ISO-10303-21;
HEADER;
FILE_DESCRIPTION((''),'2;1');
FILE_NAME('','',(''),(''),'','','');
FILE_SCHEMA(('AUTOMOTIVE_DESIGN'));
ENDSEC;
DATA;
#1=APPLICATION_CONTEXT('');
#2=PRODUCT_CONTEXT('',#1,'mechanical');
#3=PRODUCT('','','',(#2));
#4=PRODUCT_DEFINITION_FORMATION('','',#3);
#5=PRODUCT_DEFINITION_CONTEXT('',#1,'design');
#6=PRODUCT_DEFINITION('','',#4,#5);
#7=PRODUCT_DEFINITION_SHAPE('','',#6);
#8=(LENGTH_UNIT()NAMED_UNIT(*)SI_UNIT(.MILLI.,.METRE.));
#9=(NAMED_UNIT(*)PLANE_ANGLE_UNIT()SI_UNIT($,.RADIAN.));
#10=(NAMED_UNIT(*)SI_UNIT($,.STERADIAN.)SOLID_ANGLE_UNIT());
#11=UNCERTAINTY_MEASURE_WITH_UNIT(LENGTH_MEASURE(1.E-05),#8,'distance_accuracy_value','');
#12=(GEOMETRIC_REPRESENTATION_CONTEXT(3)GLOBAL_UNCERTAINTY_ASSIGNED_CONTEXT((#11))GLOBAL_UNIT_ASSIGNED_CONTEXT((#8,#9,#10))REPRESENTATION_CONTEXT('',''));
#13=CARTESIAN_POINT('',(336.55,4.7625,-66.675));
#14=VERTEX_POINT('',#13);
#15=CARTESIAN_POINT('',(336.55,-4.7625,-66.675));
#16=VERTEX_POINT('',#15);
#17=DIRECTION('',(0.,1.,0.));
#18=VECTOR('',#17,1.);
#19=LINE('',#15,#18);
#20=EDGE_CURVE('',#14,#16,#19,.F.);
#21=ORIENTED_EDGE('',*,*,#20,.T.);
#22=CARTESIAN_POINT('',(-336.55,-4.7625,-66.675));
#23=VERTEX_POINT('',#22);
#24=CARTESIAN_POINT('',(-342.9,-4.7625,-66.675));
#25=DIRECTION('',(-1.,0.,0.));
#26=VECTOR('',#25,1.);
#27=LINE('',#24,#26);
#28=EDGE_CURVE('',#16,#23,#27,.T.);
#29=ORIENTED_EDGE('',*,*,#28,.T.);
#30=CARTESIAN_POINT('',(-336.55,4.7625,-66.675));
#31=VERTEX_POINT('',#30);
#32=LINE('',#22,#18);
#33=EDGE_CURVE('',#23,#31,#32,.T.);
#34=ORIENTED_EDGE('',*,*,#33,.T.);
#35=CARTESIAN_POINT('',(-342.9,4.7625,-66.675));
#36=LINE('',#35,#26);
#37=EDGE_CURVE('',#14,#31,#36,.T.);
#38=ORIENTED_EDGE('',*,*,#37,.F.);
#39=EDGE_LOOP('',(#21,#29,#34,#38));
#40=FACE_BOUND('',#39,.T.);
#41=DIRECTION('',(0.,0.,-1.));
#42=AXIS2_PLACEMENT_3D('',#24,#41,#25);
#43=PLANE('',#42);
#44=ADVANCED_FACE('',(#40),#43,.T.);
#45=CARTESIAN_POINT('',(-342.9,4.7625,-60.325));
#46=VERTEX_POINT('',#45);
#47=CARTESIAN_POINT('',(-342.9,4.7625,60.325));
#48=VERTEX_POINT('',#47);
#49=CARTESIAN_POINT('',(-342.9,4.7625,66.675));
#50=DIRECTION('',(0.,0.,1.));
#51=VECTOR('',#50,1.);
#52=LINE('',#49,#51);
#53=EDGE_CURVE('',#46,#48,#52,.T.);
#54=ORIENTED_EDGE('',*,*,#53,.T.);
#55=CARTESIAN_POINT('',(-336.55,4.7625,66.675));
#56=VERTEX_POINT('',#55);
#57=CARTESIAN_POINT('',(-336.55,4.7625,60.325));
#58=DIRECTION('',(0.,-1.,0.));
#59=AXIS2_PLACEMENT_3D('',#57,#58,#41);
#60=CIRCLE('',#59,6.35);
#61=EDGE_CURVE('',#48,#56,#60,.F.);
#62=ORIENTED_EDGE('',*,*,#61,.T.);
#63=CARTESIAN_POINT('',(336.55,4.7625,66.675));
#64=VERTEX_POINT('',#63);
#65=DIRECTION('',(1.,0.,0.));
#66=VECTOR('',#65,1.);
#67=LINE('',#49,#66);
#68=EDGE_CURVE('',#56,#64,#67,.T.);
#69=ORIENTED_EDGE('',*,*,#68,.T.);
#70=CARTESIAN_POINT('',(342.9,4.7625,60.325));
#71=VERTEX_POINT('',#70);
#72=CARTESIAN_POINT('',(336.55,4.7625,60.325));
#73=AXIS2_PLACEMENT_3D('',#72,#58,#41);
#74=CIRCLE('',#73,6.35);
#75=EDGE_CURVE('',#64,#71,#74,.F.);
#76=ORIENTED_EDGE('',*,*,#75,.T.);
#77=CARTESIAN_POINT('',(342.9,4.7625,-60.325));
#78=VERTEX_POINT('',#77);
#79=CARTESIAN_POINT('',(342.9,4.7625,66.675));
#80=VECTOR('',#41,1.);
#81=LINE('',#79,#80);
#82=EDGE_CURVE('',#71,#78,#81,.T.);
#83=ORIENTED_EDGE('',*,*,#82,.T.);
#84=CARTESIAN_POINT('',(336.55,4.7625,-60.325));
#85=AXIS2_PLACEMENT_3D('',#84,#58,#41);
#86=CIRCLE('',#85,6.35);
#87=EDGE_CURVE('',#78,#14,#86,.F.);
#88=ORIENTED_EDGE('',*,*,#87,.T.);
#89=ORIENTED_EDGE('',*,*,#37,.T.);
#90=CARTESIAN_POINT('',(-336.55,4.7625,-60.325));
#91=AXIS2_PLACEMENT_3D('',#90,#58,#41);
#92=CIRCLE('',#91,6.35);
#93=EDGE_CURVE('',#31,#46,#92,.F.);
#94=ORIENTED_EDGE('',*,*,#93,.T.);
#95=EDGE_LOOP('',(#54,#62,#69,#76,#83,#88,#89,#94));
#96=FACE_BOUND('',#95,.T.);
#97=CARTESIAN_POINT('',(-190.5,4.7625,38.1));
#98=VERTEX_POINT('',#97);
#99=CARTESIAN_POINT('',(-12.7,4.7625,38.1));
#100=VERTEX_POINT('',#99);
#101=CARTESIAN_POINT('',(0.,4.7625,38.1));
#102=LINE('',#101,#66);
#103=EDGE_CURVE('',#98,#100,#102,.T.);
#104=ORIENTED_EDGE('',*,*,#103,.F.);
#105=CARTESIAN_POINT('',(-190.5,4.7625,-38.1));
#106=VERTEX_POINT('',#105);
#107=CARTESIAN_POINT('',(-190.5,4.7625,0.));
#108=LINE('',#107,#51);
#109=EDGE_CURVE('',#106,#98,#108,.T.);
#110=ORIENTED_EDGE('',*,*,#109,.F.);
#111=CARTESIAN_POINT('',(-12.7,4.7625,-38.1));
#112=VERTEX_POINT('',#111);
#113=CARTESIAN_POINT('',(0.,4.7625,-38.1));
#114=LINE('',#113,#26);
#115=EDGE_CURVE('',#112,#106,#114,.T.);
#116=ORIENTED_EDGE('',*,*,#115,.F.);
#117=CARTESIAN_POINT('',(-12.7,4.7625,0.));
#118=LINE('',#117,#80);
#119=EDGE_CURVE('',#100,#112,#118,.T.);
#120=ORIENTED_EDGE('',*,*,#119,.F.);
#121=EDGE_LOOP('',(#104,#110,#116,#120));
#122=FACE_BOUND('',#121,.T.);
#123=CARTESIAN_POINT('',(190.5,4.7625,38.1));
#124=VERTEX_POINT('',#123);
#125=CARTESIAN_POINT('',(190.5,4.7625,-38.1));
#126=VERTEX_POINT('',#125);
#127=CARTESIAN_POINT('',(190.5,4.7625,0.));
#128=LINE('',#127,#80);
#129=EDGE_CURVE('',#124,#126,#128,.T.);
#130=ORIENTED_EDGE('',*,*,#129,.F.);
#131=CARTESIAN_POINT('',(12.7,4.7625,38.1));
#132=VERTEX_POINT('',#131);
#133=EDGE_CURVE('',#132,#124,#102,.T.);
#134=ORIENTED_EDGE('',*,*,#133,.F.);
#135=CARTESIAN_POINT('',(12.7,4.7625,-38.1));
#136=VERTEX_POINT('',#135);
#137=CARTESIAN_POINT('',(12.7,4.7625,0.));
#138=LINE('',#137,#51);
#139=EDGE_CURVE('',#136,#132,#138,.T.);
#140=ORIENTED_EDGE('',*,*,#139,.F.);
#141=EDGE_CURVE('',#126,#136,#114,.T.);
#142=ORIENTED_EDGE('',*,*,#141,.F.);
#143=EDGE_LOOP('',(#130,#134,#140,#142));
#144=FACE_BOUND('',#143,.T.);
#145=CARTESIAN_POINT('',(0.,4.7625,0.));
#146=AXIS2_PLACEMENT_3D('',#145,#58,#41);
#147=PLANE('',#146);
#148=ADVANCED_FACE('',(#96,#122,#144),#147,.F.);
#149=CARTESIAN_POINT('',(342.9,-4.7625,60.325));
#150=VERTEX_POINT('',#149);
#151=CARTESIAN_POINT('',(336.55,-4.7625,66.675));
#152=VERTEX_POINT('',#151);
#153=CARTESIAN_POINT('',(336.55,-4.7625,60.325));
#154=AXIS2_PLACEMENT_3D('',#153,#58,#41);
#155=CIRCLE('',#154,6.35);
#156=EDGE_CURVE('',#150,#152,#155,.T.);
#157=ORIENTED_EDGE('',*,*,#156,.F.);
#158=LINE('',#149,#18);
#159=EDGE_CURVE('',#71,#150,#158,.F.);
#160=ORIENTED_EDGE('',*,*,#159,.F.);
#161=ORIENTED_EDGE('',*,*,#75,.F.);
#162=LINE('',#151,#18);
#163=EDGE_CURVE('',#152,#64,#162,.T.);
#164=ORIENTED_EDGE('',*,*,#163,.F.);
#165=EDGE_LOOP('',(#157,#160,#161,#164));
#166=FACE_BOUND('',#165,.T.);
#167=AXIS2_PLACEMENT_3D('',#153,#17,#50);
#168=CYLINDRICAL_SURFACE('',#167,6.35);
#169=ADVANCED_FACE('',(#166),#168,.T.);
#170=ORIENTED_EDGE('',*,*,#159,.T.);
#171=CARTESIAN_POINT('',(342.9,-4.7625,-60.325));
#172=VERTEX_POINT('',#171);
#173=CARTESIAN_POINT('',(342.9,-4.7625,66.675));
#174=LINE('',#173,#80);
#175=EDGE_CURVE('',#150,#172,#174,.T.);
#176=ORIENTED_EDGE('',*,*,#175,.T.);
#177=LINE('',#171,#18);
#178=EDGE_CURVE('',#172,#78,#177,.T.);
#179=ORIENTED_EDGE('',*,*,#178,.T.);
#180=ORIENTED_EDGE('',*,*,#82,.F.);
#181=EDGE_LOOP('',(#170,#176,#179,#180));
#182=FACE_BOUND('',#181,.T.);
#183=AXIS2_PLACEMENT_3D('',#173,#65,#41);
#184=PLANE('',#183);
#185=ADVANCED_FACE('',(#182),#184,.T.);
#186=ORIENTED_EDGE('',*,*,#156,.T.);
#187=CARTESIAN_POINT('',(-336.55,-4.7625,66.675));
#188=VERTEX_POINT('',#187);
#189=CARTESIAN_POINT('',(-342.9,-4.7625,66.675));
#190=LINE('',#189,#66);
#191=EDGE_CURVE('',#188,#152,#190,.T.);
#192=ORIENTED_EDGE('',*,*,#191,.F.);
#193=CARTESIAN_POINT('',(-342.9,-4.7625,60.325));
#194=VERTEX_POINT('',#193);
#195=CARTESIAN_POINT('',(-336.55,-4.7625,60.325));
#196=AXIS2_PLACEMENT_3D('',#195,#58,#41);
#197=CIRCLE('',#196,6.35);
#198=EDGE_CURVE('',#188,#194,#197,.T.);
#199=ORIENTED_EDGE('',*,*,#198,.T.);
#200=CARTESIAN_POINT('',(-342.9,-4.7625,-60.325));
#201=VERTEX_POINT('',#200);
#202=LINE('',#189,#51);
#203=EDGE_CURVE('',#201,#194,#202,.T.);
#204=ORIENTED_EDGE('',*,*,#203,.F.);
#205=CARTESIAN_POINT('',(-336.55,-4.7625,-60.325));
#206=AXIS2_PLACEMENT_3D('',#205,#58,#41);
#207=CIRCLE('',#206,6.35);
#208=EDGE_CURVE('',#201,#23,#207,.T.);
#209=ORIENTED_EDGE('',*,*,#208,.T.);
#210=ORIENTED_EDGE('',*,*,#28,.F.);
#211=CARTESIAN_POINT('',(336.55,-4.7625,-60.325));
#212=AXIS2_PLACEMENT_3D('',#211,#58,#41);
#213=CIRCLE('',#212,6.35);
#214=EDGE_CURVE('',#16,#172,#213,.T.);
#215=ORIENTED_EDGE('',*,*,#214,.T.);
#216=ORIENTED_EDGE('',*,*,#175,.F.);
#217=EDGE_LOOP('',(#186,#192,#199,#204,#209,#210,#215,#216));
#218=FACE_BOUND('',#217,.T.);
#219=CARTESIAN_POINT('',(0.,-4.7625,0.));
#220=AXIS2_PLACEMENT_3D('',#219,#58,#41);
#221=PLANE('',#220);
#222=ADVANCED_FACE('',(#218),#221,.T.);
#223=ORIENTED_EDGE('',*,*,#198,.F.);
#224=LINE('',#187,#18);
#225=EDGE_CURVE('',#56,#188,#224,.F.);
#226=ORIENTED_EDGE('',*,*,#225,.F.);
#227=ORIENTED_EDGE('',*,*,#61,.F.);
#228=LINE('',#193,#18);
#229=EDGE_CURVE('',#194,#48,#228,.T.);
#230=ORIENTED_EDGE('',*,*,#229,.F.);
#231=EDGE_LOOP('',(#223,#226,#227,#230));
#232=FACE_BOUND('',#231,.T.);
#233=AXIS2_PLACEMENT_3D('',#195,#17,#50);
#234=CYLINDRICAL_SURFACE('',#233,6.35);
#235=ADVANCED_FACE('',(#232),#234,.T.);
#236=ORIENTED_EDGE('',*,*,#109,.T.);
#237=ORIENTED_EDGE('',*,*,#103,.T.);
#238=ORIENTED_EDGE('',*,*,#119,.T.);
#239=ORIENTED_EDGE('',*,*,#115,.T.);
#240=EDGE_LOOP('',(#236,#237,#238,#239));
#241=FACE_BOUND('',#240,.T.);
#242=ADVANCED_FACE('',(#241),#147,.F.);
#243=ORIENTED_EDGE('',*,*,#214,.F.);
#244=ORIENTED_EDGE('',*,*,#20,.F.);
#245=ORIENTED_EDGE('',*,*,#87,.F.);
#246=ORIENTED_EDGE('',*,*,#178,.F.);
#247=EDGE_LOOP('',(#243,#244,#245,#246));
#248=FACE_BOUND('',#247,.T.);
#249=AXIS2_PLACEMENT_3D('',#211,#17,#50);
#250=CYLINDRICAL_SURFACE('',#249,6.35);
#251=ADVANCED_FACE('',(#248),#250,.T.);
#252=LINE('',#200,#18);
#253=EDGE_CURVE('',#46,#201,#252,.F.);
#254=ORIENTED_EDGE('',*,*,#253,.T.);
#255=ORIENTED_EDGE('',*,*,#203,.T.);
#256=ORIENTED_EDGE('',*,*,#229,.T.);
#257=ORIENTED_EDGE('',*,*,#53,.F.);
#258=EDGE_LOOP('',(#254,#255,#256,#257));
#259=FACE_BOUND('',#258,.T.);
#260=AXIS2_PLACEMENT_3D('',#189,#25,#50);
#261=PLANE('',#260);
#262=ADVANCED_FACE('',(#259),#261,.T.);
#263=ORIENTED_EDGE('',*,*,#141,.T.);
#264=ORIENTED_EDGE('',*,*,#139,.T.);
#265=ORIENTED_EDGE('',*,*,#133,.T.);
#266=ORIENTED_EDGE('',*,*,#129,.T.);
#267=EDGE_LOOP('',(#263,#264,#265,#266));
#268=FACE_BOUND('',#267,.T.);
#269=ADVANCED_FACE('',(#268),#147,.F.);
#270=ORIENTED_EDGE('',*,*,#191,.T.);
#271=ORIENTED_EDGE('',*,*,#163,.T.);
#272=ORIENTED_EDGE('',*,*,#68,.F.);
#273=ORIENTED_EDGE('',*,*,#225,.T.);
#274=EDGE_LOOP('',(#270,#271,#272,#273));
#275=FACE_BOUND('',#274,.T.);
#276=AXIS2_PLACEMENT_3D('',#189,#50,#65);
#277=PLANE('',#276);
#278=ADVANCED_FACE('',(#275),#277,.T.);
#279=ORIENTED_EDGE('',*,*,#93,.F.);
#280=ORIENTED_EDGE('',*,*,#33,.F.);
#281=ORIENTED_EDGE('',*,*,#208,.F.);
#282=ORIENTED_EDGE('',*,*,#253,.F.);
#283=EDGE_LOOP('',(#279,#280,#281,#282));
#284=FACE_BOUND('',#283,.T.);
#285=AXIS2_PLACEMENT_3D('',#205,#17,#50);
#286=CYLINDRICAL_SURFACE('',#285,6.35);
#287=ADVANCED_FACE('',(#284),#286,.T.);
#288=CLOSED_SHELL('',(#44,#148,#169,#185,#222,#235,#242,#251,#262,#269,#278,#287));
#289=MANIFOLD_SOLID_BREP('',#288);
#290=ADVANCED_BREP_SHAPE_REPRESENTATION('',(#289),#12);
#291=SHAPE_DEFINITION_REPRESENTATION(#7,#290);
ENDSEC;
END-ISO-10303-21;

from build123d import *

# Parameters (mm, degrees)
BASE_FLANGE1_START     = -4.7625
BASE_FLANGE1_OUTLINE_W = 685.8
BASE_FLANGE1_OUTLINE_H = 133.35
BASE_FLANGE1_DEPTH     = 9.525
FILLET1_R              = 6.35


# Read off the part's stored shape, not the designer's step: Base-Flange1
with BuildPart() as part:
    # Base-Flange1 outline → Base-Flange1 (new body)
    with BuildSketch(Plane(origin=(0, 0, 0), x_dir=(1, 0, 0), z_dir=(0, 1, 0)).offset(BASE_FLANGE1_START)):
        Rectangle(BASE_FLANGE1_OUTLINE_W, BASE_FLANGE1_OUTLINE_H)
    extrude(amount=BASE_FLANGE1_DEPTH)

    # Fillet1
    fillet1_edges = [part.edges().sort_by_distance(p)[0] for p in [
        (342.9, 0, 66.675),
        (-342.9, 0, 66.675),
        (-342.9, 0, -66.675),
        (342.9, 0, -66.675),
    ]]
    fillet(fillet1_edges, radius=FILLET1_R)


solid = part.part
